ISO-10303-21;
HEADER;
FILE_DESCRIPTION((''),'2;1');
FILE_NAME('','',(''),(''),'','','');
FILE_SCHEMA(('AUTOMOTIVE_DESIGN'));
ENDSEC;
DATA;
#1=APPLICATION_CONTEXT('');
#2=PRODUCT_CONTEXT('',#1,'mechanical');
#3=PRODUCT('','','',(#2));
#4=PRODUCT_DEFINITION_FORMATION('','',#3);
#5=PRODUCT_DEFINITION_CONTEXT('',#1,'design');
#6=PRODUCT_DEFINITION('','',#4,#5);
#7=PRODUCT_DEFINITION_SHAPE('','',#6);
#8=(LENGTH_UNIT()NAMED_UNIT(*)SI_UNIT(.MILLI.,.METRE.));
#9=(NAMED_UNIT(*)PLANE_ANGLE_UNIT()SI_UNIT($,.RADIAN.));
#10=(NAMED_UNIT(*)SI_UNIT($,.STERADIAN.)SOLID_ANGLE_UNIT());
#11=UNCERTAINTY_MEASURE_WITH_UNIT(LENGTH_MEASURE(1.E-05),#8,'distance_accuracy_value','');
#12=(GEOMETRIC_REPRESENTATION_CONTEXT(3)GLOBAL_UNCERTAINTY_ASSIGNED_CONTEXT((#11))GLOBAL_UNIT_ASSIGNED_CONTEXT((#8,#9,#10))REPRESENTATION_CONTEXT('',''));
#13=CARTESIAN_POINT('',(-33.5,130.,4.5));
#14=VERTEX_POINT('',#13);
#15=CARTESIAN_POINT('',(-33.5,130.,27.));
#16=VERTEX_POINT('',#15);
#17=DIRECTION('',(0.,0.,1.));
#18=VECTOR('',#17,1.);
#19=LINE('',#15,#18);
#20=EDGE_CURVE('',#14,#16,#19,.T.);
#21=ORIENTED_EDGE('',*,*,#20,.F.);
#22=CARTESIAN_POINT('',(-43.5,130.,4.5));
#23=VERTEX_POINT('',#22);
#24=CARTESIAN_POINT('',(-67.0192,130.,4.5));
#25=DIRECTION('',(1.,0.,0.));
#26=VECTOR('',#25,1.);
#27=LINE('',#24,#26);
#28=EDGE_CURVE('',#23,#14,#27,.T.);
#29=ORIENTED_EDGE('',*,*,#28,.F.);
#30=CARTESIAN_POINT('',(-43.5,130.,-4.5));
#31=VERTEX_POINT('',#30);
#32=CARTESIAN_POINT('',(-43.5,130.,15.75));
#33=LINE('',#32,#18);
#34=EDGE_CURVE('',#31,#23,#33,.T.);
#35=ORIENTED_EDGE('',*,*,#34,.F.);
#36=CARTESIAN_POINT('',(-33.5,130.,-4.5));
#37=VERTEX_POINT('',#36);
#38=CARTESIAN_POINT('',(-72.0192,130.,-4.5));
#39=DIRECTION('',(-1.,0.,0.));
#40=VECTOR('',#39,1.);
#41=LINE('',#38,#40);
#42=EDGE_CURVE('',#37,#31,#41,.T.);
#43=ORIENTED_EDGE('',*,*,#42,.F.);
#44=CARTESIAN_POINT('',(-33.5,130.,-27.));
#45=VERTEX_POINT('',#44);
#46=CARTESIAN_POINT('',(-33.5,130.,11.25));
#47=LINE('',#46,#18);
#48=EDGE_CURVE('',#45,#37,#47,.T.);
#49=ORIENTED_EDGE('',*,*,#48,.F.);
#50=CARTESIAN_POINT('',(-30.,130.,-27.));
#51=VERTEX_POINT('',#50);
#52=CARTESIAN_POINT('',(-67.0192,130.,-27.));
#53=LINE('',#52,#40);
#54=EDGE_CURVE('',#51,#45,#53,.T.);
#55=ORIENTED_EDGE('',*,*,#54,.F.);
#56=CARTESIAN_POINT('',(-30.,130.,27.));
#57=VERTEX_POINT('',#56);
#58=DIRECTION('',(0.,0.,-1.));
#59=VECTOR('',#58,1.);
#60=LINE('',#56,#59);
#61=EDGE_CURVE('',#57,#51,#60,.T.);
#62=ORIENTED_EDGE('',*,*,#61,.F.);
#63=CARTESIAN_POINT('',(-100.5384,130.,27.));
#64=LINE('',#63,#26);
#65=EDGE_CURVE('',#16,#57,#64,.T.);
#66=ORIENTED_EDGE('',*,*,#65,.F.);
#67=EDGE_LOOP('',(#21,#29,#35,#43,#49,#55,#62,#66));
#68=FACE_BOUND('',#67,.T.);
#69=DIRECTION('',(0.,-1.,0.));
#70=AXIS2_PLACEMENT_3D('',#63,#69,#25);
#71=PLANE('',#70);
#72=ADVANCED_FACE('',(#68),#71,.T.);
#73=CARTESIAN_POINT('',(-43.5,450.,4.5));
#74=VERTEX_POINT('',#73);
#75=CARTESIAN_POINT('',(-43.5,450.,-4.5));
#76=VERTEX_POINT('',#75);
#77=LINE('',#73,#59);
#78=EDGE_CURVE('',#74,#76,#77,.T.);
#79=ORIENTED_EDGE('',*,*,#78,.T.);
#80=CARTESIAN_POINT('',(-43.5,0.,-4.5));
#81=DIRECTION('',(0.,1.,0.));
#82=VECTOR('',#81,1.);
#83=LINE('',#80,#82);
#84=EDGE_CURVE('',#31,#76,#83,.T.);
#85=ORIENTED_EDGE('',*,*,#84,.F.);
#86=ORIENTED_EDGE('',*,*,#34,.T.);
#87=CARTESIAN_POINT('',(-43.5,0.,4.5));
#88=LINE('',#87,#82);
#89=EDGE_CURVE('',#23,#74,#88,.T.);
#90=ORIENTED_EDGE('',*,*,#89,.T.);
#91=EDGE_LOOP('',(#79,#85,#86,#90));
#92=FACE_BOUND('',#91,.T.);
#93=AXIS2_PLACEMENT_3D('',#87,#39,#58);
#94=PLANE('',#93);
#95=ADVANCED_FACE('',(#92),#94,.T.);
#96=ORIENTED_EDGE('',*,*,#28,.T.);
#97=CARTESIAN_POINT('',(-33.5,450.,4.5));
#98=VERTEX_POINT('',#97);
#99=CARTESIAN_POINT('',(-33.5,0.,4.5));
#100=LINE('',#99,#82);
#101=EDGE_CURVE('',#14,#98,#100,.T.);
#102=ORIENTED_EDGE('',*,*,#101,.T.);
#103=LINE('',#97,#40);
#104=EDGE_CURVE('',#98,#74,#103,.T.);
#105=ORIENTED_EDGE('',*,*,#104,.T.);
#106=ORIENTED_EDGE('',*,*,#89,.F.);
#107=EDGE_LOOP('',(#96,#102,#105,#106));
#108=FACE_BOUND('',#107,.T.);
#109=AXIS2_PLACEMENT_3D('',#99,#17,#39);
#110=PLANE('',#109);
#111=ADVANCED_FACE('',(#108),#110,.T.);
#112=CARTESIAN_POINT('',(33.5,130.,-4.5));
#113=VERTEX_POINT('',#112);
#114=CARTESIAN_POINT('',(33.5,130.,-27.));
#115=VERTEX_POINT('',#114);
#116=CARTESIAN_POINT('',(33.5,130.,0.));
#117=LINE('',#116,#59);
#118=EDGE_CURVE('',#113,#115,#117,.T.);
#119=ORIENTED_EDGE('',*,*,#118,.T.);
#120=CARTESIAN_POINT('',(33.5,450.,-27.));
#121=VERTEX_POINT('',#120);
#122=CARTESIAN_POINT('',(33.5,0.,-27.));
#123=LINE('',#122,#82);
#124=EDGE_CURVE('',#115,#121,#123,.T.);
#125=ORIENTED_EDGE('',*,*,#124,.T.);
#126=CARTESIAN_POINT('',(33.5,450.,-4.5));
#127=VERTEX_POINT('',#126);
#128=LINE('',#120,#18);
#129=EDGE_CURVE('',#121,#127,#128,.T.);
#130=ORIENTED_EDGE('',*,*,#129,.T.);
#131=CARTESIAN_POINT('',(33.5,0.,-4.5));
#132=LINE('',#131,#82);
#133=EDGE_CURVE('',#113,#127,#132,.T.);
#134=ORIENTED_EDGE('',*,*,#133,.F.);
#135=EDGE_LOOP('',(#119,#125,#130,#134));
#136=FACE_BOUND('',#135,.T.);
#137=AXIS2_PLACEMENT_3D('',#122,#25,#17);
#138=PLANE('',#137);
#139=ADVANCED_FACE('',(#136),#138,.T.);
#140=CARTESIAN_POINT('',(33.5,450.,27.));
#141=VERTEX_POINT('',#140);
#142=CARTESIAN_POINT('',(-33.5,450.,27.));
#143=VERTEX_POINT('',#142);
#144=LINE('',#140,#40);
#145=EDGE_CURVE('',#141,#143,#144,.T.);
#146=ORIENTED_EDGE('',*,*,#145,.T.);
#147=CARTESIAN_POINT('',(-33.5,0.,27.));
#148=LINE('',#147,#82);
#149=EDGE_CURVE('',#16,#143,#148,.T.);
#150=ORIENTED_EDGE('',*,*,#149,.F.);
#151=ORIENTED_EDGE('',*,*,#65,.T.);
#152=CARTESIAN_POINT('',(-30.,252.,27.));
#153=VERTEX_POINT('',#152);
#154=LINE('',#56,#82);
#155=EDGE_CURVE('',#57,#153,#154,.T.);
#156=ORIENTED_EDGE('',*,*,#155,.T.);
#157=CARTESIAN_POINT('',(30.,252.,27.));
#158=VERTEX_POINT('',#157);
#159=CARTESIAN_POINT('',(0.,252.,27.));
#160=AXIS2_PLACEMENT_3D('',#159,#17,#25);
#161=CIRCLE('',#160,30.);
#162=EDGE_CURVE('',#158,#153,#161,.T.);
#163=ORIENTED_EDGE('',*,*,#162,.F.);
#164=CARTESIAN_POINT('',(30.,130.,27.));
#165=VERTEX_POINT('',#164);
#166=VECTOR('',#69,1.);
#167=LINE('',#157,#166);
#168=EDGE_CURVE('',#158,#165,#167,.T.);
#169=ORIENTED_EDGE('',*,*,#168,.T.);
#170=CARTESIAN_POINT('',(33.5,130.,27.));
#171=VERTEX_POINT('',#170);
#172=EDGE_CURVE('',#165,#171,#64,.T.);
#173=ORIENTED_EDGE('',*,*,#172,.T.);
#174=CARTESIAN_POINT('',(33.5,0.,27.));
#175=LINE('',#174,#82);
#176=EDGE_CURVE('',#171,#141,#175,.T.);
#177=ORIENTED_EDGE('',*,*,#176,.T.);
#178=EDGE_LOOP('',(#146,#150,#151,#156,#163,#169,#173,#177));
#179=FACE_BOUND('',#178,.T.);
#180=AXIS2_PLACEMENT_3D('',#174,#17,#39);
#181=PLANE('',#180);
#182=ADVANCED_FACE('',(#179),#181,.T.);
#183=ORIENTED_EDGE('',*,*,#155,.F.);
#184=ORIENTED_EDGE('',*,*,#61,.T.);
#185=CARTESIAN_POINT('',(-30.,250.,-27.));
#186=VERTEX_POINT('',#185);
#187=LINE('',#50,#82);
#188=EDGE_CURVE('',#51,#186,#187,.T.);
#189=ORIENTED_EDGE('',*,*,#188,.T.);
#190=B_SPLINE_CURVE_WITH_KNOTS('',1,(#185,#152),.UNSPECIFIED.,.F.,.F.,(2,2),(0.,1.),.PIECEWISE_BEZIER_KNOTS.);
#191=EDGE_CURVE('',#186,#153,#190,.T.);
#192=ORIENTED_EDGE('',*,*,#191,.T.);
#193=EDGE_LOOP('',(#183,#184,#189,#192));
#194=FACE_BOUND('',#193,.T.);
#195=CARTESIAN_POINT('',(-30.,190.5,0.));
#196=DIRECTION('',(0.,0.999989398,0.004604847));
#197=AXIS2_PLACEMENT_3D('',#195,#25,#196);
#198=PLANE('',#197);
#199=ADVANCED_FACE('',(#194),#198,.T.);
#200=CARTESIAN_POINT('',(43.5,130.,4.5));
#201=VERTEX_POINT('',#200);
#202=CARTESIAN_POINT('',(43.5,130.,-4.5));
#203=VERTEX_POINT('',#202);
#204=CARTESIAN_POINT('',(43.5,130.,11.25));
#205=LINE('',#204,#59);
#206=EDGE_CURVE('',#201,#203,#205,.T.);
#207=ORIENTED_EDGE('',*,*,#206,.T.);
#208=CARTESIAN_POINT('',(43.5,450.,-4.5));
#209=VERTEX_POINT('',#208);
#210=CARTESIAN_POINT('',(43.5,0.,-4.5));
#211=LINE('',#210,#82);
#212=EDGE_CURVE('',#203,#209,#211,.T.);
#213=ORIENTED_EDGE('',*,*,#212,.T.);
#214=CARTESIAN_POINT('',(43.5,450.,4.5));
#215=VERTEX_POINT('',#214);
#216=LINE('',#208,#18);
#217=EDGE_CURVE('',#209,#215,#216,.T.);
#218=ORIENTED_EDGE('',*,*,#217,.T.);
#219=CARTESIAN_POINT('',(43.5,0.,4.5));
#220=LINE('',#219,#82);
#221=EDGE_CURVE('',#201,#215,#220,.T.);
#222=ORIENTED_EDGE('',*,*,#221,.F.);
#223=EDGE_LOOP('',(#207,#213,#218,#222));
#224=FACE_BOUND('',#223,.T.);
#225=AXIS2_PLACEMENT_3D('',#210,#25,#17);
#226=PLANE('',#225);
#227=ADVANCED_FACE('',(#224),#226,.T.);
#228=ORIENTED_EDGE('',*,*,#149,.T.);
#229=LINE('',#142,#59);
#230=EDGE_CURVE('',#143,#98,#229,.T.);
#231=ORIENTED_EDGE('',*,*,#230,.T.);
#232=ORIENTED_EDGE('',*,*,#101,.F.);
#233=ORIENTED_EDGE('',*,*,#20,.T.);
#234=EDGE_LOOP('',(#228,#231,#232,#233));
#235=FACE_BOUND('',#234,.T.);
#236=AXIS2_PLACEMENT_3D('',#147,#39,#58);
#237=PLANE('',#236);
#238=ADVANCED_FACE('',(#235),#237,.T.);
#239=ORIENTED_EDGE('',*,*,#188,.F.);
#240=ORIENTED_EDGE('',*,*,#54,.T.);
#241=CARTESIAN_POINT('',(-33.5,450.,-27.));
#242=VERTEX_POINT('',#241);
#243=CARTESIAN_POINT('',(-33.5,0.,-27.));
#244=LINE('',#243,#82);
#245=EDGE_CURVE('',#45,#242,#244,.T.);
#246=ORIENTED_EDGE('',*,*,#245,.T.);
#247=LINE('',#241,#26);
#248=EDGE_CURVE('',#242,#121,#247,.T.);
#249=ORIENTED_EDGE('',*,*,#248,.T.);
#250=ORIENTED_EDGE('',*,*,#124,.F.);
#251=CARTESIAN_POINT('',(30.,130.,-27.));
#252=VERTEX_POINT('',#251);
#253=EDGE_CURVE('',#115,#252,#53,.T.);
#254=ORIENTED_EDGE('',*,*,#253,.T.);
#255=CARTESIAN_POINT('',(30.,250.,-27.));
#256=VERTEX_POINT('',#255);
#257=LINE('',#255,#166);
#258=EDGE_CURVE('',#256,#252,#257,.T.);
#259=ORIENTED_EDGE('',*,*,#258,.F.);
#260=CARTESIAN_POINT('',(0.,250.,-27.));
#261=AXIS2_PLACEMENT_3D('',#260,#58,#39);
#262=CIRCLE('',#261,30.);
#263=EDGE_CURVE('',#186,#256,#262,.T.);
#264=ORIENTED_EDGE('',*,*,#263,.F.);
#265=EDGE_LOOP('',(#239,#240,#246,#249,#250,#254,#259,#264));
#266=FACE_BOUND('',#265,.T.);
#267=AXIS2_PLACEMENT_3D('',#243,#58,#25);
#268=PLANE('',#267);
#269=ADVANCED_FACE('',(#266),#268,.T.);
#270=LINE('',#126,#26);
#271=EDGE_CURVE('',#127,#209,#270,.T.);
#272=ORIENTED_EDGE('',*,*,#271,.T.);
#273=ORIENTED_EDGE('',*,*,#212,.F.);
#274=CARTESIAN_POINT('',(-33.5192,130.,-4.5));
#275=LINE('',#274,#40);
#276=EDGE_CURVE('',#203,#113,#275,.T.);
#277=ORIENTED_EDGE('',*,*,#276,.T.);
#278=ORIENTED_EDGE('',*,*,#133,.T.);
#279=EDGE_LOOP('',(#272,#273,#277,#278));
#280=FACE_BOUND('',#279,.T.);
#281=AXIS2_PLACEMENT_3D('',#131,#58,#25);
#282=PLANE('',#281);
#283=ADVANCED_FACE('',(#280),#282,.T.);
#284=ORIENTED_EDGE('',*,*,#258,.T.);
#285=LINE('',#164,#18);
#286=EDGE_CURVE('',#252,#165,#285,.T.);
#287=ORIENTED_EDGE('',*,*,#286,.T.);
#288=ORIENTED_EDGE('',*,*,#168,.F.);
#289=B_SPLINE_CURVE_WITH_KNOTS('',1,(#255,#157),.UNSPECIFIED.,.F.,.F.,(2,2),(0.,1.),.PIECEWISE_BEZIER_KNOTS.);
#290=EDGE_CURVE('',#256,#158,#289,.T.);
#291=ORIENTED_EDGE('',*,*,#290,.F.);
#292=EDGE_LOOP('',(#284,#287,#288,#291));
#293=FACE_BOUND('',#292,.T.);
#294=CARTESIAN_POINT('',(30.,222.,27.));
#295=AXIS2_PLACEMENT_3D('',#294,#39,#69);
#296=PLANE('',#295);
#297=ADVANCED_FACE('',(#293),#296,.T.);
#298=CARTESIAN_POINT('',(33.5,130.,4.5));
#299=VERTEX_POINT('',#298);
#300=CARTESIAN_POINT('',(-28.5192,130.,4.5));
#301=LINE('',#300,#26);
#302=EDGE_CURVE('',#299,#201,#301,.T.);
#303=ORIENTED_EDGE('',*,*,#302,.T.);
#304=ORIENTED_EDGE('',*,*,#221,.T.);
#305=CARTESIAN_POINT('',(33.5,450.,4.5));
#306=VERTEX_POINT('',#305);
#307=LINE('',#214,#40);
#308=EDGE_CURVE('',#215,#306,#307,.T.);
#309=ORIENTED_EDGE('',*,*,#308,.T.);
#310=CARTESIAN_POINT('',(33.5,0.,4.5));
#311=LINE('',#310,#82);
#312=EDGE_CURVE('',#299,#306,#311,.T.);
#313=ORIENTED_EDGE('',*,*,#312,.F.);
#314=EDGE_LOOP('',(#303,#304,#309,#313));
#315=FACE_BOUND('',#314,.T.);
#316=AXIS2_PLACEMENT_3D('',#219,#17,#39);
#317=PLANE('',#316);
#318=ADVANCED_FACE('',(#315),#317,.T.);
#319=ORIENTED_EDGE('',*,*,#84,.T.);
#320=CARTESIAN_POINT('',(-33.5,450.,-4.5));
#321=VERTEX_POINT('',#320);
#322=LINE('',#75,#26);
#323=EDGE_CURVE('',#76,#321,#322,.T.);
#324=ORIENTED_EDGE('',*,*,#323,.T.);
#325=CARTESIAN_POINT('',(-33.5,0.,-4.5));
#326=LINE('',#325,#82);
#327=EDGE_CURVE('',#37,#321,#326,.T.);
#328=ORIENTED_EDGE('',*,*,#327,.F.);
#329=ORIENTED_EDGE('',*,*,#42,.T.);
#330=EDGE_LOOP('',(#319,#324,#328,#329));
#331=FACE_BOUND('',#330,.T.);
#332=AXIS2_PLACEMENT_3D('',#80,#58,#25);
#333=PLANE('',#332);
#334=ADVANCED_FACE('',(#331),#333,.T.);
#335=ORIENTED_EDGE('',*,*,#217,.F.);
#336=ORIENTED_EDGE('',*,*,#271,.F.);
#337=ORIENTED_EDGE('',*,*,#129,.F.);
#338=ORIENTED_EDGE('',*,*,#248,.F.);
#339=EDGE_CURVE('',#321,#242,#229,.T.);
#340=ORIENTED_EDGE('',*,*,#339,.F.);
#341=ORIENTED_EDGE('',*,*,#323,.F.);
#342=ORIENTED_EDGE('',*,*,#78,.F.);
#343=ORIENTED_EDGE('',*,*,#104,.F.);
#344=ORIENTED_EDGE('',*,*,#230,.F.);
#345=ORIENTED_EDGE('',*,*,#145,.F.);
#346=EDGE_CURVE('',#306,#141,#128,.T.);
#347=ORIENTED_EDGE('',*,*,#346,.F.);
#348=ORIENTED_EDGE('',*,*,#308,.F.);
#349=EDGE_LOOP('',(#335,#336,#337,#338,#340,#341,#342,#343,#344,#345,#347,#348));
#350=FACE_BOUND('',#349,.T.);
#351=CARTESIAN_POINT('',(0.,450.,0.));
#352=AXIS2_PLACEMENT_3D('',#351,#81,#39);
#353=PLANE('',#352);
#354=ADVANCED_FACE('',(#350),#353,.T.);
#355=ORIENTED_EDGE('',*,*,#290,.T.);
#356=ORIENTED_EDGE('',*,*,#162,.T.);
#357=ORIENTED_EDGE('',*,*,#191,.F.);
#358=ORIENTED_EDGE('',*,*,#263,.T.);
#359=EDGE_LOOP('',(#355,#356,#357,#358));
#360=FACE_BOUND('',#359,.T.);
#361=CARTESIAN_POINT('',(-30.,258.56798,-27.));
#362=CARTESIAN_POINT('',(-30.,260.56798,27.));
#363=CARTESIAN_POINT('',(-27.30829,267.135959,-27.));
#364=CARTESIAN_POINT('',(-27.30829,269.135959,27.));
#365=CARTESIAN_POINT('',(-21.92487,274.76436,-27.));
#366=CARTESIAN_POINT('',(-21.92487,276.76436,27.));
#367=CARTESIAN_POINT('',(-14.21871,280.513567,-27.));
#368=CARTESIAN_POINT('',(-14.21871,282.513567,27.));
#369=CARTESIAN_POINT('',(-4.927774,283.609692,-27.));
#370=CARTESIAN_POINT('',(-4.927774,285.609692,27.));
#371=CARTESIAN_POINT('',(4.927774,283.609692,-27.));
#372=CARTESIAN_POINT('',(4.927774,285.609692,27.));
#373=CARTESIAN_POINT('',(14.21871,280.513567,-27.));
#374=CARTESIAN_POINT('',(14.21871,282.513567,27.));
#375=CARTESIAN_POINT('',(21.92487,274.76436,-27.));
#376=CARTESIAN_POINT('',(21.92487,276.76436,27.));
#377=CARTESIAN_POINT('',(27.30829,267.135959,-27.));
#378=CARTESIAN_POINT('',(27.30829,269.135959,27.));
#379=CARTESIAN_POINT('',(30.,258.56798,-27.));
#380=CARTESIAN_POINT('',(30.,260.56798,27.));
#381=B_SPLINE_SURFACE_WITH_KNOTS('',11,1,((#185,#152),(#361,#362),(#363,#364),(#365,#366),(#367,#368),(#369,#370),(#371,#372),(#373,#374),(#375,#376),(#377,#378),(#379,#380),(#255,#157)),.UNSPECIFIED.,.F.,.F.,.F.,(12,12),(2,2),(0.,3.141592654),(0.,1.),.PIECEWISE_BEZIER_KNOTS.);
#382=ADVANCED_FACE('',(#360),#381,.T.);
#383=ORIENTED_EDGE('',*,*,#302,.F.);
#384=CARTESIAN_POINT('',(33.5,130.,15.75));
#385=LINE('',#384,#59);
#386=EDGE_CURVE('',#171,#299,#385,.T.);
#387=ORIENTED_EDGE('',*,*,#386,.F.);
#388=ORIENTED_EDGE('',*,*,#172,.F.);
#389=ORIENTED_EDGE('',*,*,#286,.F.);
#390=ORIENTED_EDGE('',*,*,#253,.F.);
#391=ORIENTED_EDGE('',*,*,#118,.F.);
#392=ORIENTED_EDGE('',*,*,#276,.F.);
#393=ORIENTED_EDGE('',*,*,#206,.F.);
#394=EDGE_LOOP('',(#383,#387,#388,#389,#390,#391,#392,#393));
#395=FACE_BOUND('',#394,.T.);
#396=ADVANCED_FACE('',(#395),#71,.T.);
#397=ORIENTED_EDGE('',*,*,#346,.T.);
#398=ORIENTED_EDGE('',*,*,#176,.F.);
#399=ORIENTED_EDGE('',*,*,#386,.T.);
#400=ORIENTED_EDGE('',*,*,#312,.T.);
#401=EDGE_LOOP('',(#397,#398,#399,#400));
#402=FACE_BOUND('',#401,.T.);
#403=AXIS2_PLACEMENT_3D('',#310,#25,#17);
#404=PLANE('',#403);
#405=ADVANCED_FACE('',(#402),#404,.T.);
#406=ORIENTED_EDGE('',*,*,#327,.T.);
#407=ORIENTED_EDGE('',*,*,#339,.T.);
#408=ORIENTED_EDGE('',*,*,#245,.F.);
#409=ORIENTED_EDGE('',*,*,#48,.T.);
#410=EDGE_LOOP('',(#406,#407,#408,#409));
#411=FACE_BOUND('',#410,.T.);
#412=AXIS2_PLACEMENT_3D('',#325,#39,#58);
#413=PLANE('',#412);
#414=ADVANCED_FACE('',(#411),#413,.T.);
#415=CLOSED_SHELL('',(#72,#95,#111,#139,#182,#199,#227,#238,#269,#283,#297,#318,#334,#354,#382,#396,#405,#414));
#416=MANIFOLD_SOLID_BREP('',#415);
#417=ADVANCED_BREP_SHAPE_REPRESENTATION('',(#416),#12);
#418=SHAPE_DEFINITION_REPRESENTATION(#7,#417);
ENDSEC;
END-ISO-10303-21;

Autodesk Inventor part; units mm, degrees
ref_plane "YZ Plane" through (0, 0, 0) normal (1, 0, 0) x (0, 1, 0)
ref_plane "XZ Plane" through (0, 0, 0) normal (0, 1, 0) x (-1, 0, 0)
ref_plane "XY Plane" through (0, 0, 0) normal (0, 0, 1) x (1, 0, 0)
sketch "草圖1" plane through (0, 0, 0) normal (0, 1, 0) x (-1, 0, 0)
  line L0 (-33.5, 27) -> (33.5, 27)
  line L1 (33.5, 27) -> (33.5, -27)
  line L2 (33.5, -27) -> (-33.5, -27)
  line L3 (-33.5, -27) -> (-33.5, 27)
  line L4 (-33.5, 27) -> (33.5, -27) construction
  line L5 (33.5, 27) -> (-33.5, -27) construction
  line L6 (43.5, -4.5) -> (33.5, -4.5)
  line L7 (33.5, -4.5) -> (33.5, 4.5)
  line L8 (33.5, 4.5) -> (43.5, 4.5)
  line L9 (43.5, 4.5) -> (43.5, -4.5)
  line L10 (-33.5, -4.5) -> (-43.5, -4.5)
  line L11 (-43.5, -4.5) -> (-43.5, 4.5)
  line L12 (-43.5, 4.5) -> (-33.5, 4.5)
  line L13 (-33.5, 4.5) -> (-33.5, -4.5)
  point P0 (0, 0)
  point P1 (33.5, 0)
  point P2 (-33.5, 0)
  point P3 (-33.5, 4.5)
  point P4 (-33.5, -4.5)
  dimension "d0" = 67
  dimension "d1" = 54
  dimension "d2" = 9
  dimension "d3" = 10
extrude "擠出1" add sketch "草圖1" along normal blind 450
sketch "草圖2" plane through (-33.5, 0, 27) normal (0, 0, 1) x (1, 0, 0)
  line L0 (0, 0) -> (0, 450) projected
  line L1 (0, 450) -> (67, 450) projected
  line L2 (67, 450) -> (67, 0) projected
  line L3 (67, 0) -> (0, 0) projected
  circle A0 centre (33.5, 222) radius 30
  line L4 (3.5, 222) -> (63.5, 222)
  line L5 (63.5, 222) -> (63.5, -38.0593)
  line L6 (63.5, -38.0593) -> (3.5, -38.0593)
  line L7 (3.5, -38.0593) -> (3.5, 222)
  point P0 (33.5, 0)
  point P1 (33.5, 0)
  dimension "d6" = 222
  dimension "d7" = 60
extrude "擠出2" cut sketch "草圖2" against normal through all contours L7 A0 L5 L3 | L3 L5 L6 L7 | L4 A0 | A0 L4
sketch "草圖3" plane through (-33.5, 450, 27) normal (0, 0, 1) x (1, 0, 0)
  line L0 (-67.0384, -320) -> (134.0384, -320)
  line L1 (134.0384, -320) -> (134.0384, -450)
  line L2 (134.0384, -450) -> (-67.0384, -450)
  line L3 (-67.0384, -450) -> (-67.0384, -320)
  point P0 (33.5, -450)
  point P1 (33.5, -450)
  dimension "d10" = 130
extrude "擠出3" cut sketch "草圖3" against normal through all
sketch "草圖4" plane through (33.5, 450, -27) normal (0, 0, -1) x (-1, 0, 0)
  circle A0 centre (33.5, -200) radius 30
  arc A1 (63.5, -228) -> (3.5, -228) centre (33.5, -228) ccw construction
  line L0 (63.5, -320) -> (3.5, -320)
  line L1 (3.5, -320) -> (3.5, -200)
  line L2 (3.5, -200) -> (63.5, -200)
  line L3 (63.5, -200) -> (63.5, -320)
  point P0 (33.5, -450)
  point P1 (63.5, -320)
  dimension "d13" = 28
  dimension "d14" = 60
sketch "草圖5" plane through (-33.5, 450, 27) normal (0, 0, 1) x (1, 0, 0)
  circle A0 centre (33.5, -198) radius 30
  arc A1 (63.5, -228) -> (3.5, -228) centre (33.5, -228) ccw construction
  line L0 (63.5, -320) -> (3.5, -320)
  line L1 (3.5, -320) -> (3.5, -198)
  line L2 (3.5, -198) -> (63.5, -198)
  line L3 (63.5, -198) -> (63.5, -320)
  point P0 (33.5, -450)
  point P1 (63.5, -320)
  dimension "d15" = 30
  dimension "d16" = 60
loft "斷面混成1" cut profiles "草圖4", "草圖5"
properties part number "Slider-8"
